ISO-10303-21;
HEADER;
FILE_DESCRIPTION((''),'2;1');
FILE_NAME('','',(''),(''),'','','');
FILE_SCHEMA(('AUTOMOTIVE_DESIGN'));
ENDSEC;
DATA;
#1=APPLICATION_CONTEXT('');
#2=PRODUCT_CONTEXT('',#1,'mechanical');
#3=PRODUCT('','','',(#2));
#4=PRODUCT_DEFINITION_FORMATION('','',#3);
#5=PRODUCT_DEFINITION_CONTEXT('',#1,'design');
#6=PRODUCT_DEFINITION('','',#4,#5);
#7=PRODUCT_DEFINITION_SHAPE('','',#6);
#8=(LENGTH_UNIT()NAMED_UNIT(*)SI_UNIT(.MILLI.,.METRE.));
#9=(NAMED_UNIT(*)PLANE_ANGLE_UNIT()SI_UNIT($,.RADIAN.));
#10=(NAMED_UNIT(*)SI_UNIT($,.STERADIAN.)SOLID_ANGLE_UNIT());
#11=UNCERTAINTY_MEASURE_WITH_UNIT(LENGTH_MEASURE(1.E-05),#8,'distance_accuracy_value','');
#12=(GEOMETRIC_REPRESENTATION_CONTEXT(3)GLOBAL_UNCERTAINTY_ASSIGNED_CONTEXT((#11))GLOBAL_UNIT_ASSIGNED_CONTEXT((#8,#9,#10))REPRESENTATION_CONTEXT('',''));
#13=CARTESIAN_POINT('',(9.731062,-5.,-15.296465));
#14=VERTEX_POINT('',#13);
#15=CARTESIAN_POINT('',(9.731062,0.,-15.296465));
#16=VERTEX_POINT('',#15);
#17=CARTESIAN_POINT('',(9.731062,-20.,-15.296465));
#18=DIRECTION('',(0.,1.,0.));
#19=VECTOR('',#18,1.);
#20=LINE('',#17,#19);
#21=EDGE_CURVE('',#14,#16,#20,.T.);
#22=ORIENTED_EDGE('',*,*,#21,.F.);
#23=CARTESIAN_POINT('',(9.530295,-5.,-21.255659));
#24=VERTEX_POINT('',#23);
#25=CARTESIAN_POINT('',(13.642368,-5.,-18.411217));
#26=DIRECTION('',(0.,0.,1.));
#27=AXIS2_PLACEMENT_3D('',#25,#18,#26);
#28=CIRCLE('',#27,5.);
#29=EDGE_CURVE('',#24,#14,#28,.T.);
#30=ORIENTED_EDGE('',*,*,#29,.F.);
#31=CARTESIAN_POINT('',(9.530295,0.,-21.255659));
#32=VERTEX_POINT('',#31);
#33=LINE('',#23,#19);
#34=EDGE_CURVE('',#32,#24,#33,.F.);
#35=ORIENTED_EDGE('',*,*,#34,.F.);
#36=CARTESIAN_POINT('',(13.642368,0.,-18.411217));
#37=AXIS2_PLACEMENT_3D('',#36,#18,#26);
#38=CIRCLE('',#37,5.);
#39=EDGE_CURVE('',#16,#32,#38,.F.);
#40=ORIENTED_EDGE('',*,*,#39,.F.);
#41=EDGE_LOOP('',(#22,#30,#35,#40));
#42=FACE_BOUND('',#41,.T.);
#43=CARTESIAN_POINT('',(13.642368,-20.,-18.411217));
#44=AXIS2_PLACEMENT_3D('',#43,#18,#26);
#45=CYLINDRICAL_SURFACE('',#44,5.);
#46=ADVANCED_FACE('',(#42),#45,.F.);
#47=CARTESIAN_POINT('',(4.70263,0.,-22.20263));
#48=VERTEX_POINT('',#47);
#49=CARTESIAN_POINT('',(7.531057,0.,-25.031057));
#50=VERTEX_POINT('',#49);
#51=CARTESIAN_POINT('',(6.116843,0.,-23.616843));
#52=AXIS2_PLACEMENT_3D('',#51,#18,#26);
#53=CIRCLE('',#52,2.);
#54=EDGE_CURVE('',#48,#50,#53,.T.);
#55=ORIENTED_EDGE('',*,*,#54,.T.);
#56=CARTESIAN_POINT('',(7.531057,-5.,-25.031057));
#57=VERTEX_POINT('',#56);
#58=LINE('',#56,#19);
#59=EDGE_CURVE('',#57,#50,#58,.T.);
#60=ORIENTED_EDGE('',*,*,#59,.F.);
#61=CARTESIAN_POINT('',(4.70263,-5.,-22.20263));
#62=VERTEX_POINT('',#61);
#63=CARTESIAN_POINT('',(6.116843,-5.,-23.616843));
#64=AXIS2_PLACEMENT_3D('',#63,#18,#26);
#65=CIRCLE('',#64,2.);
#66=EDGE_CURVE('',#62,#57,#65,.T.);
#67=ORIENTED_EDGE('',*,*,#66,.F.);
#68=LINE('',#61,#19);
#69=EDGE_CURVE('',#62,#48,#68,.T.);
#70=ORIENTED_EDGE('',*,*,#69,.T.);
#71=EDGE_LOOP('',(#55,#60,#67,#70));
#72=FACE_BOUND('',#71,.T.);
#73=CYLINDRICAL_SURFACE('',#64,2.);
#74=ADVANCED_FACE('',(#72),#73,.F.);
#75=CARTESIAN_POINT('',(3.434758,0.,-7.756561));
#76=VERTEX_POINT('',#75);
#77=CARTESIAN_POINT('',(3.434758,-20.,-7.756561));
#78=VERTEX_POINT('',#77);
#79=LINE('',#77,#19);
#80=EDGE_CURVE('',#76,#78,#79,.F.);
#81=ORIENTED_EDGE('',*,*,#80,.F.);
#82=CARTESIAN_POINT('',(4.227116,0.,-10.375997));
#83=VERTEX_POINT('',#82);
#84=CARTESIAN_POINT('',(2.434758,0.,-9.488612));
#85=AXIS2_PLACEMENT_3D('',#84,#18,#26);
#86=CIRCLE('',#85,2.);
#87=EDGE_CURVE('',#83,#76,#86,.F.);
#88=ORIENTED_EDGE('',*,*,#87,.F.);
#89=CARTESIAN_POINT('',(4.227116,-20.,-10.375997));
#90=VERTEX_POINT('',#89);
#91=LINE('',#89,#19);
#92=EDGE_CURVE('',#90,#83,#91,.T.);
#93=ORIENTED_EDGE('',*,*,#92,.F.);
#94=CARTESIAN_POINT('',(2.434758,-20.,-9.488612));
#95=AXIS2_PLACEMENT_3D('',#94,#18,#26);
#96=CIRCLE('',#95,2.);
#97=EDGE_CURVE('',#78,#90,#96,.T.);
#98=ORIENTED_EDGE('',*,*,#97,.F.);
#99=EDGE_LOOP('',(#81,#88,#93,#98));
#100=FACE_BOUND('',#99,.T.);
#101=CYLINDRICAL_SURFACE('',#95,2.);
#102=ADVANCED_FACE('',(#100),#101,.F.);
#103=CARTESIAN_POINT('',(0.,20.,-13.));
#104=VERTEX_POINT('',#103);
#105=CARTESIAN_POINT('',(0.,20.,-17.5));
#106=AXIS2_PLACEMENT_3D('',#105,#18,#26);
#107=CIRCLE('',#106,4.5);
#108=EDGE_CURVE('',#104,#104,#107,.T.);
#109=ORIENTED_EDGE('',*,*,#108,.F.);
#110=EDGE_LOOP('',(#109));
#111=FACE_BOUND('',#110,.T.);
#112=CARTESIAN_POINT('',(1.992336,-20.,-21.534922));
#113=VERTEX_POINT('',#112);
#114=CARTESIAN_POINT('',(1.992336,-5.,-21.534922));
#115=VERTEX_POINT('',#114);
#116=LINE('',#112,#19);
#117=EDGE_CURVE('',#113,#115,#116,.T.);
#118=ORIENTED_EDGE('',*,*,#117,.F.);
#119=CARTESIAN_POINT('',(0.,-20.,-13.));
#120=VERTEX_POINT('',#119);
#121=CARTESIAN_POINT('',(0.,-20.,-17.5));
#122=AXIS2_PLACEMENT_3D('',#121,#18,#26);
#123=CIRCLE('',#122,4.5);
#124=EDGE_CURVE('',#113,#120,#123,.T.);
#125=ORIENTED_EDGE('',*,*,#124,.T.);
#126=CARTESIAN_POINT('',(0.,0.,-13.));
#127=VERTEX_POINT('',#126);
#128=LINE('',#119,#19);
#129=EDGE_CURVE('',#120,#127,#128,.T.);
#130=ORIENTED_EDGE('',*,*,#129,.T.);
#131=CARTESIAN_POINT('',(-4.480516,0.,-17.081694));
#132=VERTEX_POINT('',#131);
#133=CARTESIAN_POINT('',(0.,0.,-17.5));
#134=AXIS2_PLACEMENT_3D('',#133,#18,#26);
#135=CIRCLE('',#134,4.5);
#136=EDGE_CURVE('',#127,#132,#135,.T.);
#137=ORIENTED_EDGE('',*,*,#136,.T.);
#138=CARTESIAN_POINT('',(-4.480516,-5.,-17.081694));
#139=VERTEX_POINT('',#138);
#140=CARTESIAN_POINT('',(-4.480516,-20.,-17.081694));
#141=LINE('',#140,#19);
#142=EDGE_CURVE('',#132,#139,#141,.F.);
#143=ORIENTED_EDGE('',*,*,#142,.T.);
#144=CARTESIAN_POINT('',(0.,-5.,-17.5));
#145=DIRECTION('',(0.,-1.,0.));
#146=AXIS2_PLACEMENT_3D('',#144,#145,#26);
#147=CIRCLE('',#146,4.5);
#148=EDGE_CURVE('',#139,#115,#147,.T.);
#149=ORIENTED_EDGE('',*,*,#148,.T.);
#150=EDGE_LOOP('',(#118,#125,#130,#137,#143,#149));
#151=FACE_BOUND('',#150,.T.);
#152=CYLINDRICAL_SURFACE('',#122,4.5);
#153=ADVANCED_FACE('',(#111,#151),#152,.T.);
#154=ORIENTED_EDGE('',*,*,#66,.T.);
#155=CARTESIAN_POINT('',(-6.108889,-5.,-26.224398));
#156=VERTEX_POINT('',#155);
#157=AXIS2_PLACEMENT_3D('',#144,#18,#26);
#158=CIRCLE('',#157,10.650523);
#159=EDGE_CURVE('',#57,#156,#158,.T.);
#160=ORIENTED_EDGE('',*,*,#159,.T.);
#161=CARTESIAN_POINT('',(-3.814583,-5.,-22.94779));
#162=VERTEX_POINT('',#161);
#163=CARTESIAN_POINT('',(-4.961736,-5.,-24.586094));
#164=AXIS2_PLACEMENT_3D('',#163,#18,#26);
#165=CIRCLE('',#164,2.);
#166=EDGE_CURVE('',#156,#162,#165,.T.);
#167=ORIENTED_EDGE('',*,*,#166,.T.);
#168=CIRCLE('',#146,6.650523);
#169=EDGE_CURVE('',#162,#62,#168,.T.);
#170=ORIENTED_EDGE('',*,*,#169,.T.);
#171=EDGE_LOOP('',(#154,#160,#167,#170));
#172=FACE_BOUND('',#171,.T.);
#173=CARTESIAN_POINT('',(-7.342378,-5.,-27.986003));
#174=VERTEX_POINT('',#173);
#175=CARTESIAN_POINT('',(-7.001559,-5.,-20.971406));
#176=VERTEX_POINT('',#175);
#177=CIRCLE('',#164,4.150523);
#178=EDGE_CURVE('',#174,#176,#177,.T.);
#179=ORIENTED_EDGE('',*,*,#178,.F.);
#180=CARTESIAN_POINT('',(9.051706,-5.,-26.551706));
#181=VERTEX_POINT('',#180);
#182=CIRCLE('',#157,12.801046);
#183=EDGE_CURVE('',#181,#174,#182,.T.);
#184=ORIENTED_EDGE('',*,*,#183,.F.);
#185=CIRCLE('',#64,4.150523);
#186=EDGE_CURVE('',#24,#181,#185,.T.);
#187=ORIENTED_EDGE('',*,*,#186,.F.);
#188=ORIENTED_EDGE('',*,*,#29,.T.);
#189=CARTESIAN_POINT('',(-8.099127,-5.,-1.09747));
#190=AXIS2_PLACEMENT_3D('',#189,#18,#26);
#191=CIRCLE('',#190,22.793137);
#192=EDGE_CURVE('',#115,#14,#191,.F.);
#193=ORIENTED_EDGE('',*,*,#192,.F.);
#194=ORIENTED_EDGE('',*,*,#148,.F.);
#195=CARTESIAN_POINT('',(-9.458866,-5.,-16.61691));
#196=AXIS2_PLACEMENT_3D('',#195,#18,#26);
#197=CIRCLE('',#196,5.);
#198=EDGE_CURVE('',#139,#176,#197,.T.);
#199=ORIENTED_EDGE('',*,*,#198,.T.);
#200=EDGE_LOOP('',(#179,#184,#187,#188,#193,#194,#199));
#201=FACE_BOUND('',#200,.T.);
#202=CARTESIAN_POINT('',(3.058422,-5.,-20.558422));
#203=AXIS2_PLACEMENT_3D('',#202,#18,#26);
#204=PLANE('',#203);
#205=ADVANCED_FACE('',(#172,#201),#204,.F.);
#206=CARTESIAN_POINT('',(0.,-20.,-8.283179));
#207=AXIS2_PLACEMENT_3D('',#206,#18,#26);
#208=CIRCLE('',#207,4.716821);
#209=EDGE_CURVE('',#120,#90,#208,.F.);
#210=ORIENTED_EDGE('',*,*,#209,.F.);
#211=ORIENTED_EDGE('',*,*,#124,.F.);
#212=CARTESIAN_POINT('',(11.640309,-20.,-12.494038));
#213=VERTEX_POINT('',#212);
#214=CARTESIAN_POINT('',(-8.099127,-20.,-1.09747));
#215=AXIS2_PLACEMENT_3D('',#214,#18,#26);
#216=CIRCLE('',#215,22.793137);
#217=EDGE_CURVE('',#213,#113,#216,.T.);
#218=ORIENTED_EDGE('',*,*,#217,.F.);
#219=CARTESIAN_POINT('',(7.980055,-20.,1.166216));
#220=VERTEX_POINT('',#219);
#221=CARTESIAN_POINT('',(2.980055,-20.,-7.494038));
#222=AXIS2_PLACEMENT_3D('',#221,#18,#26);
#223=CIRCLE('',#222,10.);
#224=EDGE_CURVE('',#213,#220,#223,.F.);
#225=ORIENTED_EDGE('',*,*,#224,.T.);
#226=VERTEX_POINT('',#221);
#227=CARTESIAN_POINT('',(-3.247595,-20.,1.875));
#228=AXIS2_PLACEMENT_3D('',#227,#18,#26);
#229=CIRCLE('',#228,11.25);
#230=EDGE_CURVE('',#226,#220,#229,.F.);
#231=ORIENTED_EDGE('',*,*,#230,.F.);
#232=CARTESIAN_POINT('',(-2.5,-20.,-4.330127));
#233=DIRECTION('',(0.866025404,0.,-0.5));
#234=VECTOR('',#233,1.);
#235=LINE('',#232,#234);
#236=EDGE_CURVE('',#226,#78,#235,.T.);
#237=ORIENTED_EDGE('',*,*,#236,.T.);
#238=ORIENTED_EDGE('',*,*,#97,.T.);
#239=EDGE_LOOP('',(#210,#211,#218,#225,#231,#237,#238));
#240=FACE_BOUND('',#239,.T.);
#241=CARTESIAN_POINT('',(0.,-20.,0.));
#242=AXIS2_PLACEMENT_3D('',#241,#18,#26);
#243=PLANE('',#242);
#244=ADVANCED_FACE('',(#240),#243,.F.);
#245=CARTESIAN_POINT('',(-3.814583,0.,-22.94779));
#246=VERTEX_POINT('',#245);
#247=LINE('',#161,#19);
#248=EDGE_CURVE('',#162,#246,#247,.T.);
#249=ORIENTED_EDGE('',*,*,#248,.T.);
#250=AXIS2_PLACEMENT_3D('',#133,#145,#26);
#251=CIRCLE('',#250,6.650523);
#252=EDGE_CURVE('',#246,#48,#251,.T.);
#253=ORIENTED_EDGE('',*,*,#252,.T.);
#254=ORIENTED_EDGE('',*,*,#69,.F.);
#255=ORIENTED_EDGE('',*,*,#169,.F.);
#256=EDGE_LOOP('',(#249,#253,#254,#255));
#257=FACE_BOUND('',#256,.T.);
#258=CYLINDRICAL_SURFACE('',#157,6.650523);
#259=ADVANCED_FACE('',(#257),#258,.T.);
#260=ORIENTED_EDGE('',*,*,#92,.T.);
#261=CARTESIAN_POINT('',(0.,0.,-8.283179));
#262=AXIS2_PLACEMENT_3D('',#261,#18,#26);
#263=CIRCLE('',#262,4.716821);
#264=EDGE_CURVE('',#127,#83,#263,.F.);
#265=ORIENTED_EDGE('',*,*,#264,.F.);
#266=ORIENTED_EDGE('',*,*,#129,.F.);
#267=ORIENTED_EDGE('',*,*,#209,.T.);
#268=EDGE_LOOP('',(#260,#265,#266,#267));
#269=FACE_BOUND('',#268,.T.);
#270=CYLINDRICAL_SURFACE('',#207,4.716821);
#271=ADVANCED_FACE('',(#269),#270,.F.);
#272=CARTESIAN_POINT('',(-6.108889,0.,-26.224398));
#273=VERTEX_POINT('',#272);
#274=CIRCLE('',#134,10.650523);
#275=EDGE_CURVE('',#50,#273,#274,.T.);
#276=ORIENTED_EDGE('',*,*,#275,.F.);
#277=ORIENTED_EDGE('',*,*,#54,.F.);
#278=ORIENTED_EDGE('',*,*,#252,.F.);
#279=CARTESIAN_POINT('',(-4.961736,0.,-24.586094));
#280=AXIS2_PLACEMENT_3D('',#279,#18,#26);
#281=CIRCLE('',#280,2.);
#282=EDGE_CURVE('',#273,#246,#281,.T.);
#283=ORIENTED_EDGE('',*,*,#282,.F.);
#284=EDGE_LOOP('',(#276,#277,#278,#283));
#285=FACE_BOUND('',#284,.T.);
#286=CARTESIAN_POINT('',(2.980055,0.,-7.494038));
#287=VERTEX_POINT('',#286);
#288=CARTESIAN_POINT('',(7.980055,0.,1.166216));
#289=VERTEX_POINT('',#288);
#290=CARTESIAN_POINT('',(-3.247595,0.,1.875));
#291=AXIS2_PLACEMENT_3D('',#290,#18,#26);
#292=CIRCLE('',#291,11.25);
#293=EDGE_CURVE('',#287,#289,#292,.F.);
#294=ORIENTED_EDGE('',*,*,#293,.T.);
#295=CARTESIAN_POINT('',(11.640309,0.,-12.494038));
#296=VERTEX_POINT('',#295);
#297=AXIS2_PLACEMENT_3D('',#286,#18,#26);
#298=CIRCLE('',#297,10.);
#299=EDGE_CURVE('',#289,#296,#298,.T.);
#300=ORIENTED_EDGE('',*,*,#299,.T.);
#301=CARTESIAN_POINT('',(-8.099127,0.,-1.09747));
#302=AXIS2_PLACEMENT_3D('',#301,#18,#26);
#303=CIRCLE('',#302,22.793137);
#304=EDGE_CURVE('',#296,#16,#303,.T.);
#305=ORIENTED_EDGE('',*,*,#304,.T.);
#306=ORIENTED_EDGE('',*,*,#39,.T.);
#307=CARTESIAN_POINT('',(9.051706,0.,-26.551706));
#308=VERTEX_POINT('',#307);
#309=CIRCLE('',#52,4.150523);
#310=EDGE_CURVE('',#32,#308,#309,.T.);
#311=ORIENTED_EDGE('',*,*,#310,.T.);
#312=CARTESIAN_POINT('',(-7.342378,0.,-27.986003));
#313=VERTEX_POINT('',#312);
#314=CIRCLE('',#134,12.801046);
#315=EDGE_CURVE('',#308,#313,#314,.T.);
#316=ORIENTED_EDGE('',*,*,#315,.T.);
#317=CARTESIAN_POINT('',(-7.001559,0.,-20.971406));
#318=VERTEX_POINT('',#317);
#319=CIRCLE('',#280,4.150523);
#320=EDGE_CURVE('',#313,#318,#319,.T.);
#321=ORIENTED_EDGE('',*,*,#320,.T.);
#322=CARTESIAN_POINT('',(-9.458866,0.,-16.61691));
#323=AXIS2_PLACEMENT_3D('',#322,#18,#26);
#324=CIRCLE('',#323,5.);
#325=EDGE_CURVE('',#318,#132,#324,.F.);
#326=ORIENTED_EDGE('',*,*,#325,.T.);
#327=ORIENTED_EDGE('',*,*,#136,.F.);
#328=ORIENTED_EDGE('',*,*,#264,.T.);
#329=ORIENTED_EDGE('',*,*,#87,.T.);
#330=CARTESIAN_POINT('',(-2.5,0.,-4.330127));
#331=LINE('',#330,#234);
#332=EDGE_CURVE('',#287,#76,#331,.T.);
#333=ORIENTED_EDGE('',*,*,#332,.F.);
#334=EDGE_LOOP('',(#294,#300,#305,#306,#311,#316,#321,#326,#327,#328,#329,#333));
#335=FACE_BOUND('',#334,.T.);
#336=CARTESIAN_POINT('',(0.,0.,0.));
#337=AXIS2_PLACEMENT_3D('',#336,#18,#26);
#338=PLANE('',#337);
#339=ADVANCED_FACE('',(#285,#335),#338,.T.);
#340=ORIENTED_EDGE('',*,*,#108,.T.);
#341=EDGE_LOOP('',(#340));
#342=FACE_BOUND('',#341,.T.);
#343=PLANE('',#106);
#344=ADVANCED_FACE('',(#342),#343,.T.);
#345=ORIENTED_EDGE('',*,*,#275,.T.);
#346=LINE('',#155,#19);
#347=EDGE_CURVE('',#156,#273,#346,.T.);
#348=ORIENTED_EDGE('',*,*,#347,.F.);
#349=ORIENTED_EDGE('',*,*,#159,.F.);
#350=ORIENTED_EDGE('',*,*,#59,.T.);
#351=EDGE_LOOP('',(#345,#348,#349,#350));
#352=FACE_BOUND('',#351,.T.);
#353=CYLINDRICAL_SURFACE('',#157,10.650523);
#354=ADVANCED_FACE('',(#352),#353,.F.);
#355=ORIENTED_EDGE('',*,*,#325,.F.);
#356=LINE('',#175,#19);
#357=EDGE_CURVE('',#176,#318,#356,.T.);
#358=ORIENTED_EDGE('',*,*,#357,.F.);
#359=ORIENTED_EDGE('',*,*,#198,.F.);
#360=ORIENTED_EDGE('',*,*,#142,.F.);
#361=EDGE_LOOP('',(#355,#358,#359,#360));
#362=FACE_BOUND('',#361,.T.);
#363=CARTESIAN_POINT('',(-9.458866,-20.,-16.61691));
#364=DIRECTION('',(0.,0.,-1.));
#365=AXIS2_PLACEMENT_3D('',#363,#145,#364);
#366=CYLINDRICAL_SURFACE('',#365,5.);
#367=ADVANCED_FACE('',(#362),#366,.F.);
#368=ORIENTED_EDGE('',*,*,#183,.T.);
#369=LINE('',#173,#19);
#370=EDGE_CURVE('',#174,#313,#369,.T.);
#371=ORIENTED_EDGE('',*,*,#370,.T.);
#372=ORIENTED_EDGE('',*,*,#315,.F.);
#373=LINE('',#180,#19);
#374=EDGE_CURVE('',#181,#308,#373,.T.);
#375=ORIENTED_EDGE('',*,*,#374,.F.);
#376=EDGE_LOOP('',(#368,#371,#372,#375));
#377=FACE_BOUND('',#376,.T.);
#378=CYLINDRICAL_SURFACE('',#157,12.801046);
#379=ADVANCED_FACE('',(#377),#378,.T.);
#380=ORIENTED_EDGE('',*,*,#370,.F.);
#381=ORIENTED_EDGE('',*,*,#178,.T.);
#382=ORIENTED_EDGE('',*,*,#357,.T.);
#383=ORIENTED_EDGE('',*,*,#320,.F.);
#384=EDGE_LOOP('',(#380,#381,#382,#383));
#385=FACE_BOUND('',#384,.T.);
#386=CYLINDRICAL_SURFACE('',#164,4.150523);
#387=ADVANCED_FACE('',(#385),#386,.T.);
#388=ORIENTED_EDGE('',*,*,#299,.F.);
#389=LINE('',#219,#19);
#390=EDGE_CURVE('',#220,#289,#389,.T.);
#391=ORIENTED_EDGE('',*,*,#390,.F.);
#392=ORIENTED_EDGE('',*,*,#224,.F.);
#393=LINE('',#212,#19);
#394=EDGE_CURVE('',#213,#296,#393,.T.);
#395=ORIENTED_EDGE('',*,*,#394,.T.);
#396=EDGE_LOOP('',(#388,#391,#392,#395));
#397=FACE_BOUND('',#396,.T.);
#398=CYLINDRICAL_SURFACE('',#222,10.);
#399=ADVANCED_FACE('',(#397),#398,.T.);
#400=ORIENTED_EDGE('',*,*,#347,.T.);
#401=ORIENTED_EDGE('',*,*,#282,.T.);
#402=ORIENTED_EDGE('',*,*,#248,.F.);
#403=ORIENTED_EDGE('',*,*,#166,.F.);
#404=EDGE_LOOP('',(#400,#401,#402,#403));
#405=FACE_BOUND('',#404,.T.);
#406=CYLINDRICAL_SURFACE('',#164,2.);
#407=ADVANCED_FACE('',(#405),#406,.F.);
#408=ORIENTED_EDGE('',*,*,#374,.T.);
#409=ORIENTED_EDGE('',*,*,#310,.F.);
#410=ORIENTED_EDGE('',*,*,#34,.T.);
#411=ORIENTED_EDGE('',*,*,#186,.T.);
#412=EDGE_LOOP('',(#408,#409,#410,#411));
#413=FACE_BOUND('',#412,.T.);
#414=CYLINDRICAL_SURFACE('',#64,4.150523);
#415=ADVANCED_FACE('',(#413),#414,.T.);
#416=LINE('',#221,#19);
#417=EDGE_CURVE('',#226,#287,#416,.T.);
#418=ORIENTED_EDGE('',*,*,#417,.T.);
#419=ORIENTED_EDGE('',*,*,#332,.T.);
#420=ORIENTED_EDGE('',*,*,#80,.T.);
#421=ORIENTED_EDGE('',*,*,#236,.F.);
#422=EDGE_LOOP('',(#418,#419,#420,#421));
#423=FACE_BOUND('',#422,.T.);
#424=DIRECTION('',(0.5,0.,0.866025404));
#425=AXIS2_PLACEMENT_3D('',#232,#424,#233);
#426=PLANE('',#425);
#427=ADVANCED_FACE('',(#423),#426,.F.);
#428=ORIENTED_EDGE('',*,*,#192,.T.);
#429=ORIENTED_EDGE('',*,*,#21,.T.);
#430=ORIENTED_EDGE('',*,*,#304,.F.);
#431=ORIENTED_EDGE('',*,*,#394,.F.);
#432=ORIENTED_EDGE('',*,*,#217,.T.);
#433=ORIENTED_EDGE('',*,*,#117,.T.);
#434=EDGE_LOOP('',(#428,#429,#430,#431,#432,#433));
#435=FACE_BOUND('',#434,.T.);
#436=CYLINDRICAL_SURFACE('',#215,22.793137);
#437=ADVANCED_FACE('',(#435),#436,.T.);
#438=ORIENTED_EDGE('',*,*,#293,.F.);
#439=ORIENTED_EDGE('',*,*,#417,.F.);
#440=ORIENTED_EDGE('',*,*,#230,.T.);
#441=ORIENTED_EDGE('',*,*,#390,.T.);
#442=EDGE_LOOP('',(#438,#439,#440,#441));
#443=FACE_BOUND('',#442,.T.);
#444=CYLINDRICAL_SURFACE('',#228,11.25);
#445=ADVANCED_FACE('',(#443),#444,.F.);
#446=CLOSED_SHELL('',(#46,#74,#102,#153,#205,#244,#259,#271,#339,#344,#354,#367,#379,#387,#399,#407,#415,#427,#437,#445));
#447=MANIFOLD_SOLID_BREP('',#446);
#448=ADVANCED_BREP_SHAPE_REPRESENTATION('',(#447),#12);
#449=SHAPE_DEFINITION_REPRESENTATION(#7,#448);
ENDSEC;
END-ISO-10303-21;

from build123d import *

# Parameters (mm, degrees)
SALIENTE_EXTRUIR1_DEPTH = 20
REDONDEO1_R             = 10
SALIENTE_EXTRUIR2_START = 20
CROQUIS1_4_R            = 4.5
SALIENTE_EXTRUIR2_DEPTH = 20
SALIENTE_EXTRUIR4_DEPTH = 5
REDONDEO4_R             = 5
REDONDEO5_R             = 2


with BuildPart() as part:
    # Croquis1 → Saliente-Extruir1 (new body)
    with BuildSketch(Plane(origin=(0, 0, 0), x_dir=(1, 0, 0), z_dir=(0, 1, 0))):
        with BuildLine():
            Line((4.71210557073282, 8.494038111608782), (2.980054763163943, 7.494038111608782))
            ThreePointArc((2.9800547631639436, 7.494038111608781), (6.495190528383288, 3.749999999999996), (7.9800547631639365, -1.1662159262356018))
            Line((7.980054763163938, -1.166215926235604), (16.640308801008324, 3.8337840737643942))
            Line((16.640308801008324, 3.833784073764395), (11.640308801008324, 12.49403811160878))
            ThreePointArc((11.640308801008327, 12.494038111608782), (7.486283619207324, 17.729429010253995), (1.992335720896067, 21.53492235058391))
            ThreePointArc((1.9923357208960657, 21.534922350583905), (-4.3821884132033615, 18.52294902668032), (2.49e-15, 13))
            ThreePointArc((4.3e-16, 13), (3.259893842188938, 11.692210023771297), (4.712105570732819, 8.494038111608784))
        make_face()
    extrude(amount=-SALIENTE_EXTRUIR1_DEPTH)

    # Redondeo1
    redondeo1_edges = [part.edges().sort_by_distance(p)[0] for p in [
        (16.640308801008324, -10, -3.8337840737643947),
    ]]
    fillet(redondeo1_edges, radius=REDONDEO1_R - 0.0001)  # a hair under: the kernel refuses the full size

    # Croquis1<4> → Saliente-Extruir2 (add)
    with BuildSketch(Plane(origin=(0, 0, 0), x_dir=(1, 0, 0), z_dir=(0, 1, 0)).offset(SALIENTE_EXTRUIR2_START)):
        with Locations(Location((4e-17, 17.5, 0), (0, 0, 270))):
            Circle(CROQUIS1_4_R)
    extrude(amount=-SALIENTE_EXTRUIR2_DEPTH)

    # Croquis2 → Saliente-Extruir4 (add)
    with BuildSketch(Plane(origin=(0, 0, 0), x_dir=(1, 0, 0), z_dir=(0, 1, 0))):
        with BuildLine():
            ThreePointArc((9.051706443450353, 26.551706443450232), (1.1156846733798031, 30.2523341701189), (-7.342378354819137, 27.986003012181577))
            ThreePointArc((-7.342378354819137, 27.986003012181577), (-8.36164556563995, 22.20545141012103), (-2.581093963579654, 21.186184199300502))
            ThreePointArc((-2.581093963579654, 21.186184199300502), (0.3922008423644143, 21.98287614141279), (3.181980515339327, 20.681980515339635))
            ThreePointArc((3.181980515339327, 20.681980515339635), (9.051706443449934, 20.681980515339355), (9.051706443450353, 26.551706443450232))
        make_face()
        with BuildLine():
            ThreePointArc((7.531057041767888, 25.031057041767813), (0.928254243367484, 28.109994551949146), (-6.108889031901341, 26.224397694318867))
            ThreePointArc((-6.108889031901341, 26.224397694318867), (-6.600040247777167, 23.438940733039082), (-3.814583286497142, 22.947789517162914))
            ThreePointArc((-3.814583286497142, 22.947789517162914), (0.579631272376833, 24.12521575958216), (4.702629917021658, 22.20262991702166))
            ThreePointArc((4.702629917021658, 22.20262991702166), (7.531057041767845, 22.20262991702162), (7.531057041767888, 25.031057041767813))
        make_face(mode=Mode.SUBTRACT)
    extrude(amount=-SALIENTE_EXTRUIR4_DEPTH)

    # Redondeo4
    redondeo4_edges = [part.edges().sort_by_distance(p)[0] for p in [
        (5.278570690107173, -2.5, -19.551853938657132),
        (-2.5810939635796544, -2.5, -21.1861841993005),
    ]]
    fillet(redondeo4_edges, radius=REDONDEO4_R)

    # Redondeo5
    redondeo5_edges = [part.edges().sort_by_distance(p)[0] for p in [
        (4.712105570732819, -10, -8.494038111608784),
    ]]
    fillet(redondeo5_edges, radius=REDONDEO5_R)


solid = part.part
